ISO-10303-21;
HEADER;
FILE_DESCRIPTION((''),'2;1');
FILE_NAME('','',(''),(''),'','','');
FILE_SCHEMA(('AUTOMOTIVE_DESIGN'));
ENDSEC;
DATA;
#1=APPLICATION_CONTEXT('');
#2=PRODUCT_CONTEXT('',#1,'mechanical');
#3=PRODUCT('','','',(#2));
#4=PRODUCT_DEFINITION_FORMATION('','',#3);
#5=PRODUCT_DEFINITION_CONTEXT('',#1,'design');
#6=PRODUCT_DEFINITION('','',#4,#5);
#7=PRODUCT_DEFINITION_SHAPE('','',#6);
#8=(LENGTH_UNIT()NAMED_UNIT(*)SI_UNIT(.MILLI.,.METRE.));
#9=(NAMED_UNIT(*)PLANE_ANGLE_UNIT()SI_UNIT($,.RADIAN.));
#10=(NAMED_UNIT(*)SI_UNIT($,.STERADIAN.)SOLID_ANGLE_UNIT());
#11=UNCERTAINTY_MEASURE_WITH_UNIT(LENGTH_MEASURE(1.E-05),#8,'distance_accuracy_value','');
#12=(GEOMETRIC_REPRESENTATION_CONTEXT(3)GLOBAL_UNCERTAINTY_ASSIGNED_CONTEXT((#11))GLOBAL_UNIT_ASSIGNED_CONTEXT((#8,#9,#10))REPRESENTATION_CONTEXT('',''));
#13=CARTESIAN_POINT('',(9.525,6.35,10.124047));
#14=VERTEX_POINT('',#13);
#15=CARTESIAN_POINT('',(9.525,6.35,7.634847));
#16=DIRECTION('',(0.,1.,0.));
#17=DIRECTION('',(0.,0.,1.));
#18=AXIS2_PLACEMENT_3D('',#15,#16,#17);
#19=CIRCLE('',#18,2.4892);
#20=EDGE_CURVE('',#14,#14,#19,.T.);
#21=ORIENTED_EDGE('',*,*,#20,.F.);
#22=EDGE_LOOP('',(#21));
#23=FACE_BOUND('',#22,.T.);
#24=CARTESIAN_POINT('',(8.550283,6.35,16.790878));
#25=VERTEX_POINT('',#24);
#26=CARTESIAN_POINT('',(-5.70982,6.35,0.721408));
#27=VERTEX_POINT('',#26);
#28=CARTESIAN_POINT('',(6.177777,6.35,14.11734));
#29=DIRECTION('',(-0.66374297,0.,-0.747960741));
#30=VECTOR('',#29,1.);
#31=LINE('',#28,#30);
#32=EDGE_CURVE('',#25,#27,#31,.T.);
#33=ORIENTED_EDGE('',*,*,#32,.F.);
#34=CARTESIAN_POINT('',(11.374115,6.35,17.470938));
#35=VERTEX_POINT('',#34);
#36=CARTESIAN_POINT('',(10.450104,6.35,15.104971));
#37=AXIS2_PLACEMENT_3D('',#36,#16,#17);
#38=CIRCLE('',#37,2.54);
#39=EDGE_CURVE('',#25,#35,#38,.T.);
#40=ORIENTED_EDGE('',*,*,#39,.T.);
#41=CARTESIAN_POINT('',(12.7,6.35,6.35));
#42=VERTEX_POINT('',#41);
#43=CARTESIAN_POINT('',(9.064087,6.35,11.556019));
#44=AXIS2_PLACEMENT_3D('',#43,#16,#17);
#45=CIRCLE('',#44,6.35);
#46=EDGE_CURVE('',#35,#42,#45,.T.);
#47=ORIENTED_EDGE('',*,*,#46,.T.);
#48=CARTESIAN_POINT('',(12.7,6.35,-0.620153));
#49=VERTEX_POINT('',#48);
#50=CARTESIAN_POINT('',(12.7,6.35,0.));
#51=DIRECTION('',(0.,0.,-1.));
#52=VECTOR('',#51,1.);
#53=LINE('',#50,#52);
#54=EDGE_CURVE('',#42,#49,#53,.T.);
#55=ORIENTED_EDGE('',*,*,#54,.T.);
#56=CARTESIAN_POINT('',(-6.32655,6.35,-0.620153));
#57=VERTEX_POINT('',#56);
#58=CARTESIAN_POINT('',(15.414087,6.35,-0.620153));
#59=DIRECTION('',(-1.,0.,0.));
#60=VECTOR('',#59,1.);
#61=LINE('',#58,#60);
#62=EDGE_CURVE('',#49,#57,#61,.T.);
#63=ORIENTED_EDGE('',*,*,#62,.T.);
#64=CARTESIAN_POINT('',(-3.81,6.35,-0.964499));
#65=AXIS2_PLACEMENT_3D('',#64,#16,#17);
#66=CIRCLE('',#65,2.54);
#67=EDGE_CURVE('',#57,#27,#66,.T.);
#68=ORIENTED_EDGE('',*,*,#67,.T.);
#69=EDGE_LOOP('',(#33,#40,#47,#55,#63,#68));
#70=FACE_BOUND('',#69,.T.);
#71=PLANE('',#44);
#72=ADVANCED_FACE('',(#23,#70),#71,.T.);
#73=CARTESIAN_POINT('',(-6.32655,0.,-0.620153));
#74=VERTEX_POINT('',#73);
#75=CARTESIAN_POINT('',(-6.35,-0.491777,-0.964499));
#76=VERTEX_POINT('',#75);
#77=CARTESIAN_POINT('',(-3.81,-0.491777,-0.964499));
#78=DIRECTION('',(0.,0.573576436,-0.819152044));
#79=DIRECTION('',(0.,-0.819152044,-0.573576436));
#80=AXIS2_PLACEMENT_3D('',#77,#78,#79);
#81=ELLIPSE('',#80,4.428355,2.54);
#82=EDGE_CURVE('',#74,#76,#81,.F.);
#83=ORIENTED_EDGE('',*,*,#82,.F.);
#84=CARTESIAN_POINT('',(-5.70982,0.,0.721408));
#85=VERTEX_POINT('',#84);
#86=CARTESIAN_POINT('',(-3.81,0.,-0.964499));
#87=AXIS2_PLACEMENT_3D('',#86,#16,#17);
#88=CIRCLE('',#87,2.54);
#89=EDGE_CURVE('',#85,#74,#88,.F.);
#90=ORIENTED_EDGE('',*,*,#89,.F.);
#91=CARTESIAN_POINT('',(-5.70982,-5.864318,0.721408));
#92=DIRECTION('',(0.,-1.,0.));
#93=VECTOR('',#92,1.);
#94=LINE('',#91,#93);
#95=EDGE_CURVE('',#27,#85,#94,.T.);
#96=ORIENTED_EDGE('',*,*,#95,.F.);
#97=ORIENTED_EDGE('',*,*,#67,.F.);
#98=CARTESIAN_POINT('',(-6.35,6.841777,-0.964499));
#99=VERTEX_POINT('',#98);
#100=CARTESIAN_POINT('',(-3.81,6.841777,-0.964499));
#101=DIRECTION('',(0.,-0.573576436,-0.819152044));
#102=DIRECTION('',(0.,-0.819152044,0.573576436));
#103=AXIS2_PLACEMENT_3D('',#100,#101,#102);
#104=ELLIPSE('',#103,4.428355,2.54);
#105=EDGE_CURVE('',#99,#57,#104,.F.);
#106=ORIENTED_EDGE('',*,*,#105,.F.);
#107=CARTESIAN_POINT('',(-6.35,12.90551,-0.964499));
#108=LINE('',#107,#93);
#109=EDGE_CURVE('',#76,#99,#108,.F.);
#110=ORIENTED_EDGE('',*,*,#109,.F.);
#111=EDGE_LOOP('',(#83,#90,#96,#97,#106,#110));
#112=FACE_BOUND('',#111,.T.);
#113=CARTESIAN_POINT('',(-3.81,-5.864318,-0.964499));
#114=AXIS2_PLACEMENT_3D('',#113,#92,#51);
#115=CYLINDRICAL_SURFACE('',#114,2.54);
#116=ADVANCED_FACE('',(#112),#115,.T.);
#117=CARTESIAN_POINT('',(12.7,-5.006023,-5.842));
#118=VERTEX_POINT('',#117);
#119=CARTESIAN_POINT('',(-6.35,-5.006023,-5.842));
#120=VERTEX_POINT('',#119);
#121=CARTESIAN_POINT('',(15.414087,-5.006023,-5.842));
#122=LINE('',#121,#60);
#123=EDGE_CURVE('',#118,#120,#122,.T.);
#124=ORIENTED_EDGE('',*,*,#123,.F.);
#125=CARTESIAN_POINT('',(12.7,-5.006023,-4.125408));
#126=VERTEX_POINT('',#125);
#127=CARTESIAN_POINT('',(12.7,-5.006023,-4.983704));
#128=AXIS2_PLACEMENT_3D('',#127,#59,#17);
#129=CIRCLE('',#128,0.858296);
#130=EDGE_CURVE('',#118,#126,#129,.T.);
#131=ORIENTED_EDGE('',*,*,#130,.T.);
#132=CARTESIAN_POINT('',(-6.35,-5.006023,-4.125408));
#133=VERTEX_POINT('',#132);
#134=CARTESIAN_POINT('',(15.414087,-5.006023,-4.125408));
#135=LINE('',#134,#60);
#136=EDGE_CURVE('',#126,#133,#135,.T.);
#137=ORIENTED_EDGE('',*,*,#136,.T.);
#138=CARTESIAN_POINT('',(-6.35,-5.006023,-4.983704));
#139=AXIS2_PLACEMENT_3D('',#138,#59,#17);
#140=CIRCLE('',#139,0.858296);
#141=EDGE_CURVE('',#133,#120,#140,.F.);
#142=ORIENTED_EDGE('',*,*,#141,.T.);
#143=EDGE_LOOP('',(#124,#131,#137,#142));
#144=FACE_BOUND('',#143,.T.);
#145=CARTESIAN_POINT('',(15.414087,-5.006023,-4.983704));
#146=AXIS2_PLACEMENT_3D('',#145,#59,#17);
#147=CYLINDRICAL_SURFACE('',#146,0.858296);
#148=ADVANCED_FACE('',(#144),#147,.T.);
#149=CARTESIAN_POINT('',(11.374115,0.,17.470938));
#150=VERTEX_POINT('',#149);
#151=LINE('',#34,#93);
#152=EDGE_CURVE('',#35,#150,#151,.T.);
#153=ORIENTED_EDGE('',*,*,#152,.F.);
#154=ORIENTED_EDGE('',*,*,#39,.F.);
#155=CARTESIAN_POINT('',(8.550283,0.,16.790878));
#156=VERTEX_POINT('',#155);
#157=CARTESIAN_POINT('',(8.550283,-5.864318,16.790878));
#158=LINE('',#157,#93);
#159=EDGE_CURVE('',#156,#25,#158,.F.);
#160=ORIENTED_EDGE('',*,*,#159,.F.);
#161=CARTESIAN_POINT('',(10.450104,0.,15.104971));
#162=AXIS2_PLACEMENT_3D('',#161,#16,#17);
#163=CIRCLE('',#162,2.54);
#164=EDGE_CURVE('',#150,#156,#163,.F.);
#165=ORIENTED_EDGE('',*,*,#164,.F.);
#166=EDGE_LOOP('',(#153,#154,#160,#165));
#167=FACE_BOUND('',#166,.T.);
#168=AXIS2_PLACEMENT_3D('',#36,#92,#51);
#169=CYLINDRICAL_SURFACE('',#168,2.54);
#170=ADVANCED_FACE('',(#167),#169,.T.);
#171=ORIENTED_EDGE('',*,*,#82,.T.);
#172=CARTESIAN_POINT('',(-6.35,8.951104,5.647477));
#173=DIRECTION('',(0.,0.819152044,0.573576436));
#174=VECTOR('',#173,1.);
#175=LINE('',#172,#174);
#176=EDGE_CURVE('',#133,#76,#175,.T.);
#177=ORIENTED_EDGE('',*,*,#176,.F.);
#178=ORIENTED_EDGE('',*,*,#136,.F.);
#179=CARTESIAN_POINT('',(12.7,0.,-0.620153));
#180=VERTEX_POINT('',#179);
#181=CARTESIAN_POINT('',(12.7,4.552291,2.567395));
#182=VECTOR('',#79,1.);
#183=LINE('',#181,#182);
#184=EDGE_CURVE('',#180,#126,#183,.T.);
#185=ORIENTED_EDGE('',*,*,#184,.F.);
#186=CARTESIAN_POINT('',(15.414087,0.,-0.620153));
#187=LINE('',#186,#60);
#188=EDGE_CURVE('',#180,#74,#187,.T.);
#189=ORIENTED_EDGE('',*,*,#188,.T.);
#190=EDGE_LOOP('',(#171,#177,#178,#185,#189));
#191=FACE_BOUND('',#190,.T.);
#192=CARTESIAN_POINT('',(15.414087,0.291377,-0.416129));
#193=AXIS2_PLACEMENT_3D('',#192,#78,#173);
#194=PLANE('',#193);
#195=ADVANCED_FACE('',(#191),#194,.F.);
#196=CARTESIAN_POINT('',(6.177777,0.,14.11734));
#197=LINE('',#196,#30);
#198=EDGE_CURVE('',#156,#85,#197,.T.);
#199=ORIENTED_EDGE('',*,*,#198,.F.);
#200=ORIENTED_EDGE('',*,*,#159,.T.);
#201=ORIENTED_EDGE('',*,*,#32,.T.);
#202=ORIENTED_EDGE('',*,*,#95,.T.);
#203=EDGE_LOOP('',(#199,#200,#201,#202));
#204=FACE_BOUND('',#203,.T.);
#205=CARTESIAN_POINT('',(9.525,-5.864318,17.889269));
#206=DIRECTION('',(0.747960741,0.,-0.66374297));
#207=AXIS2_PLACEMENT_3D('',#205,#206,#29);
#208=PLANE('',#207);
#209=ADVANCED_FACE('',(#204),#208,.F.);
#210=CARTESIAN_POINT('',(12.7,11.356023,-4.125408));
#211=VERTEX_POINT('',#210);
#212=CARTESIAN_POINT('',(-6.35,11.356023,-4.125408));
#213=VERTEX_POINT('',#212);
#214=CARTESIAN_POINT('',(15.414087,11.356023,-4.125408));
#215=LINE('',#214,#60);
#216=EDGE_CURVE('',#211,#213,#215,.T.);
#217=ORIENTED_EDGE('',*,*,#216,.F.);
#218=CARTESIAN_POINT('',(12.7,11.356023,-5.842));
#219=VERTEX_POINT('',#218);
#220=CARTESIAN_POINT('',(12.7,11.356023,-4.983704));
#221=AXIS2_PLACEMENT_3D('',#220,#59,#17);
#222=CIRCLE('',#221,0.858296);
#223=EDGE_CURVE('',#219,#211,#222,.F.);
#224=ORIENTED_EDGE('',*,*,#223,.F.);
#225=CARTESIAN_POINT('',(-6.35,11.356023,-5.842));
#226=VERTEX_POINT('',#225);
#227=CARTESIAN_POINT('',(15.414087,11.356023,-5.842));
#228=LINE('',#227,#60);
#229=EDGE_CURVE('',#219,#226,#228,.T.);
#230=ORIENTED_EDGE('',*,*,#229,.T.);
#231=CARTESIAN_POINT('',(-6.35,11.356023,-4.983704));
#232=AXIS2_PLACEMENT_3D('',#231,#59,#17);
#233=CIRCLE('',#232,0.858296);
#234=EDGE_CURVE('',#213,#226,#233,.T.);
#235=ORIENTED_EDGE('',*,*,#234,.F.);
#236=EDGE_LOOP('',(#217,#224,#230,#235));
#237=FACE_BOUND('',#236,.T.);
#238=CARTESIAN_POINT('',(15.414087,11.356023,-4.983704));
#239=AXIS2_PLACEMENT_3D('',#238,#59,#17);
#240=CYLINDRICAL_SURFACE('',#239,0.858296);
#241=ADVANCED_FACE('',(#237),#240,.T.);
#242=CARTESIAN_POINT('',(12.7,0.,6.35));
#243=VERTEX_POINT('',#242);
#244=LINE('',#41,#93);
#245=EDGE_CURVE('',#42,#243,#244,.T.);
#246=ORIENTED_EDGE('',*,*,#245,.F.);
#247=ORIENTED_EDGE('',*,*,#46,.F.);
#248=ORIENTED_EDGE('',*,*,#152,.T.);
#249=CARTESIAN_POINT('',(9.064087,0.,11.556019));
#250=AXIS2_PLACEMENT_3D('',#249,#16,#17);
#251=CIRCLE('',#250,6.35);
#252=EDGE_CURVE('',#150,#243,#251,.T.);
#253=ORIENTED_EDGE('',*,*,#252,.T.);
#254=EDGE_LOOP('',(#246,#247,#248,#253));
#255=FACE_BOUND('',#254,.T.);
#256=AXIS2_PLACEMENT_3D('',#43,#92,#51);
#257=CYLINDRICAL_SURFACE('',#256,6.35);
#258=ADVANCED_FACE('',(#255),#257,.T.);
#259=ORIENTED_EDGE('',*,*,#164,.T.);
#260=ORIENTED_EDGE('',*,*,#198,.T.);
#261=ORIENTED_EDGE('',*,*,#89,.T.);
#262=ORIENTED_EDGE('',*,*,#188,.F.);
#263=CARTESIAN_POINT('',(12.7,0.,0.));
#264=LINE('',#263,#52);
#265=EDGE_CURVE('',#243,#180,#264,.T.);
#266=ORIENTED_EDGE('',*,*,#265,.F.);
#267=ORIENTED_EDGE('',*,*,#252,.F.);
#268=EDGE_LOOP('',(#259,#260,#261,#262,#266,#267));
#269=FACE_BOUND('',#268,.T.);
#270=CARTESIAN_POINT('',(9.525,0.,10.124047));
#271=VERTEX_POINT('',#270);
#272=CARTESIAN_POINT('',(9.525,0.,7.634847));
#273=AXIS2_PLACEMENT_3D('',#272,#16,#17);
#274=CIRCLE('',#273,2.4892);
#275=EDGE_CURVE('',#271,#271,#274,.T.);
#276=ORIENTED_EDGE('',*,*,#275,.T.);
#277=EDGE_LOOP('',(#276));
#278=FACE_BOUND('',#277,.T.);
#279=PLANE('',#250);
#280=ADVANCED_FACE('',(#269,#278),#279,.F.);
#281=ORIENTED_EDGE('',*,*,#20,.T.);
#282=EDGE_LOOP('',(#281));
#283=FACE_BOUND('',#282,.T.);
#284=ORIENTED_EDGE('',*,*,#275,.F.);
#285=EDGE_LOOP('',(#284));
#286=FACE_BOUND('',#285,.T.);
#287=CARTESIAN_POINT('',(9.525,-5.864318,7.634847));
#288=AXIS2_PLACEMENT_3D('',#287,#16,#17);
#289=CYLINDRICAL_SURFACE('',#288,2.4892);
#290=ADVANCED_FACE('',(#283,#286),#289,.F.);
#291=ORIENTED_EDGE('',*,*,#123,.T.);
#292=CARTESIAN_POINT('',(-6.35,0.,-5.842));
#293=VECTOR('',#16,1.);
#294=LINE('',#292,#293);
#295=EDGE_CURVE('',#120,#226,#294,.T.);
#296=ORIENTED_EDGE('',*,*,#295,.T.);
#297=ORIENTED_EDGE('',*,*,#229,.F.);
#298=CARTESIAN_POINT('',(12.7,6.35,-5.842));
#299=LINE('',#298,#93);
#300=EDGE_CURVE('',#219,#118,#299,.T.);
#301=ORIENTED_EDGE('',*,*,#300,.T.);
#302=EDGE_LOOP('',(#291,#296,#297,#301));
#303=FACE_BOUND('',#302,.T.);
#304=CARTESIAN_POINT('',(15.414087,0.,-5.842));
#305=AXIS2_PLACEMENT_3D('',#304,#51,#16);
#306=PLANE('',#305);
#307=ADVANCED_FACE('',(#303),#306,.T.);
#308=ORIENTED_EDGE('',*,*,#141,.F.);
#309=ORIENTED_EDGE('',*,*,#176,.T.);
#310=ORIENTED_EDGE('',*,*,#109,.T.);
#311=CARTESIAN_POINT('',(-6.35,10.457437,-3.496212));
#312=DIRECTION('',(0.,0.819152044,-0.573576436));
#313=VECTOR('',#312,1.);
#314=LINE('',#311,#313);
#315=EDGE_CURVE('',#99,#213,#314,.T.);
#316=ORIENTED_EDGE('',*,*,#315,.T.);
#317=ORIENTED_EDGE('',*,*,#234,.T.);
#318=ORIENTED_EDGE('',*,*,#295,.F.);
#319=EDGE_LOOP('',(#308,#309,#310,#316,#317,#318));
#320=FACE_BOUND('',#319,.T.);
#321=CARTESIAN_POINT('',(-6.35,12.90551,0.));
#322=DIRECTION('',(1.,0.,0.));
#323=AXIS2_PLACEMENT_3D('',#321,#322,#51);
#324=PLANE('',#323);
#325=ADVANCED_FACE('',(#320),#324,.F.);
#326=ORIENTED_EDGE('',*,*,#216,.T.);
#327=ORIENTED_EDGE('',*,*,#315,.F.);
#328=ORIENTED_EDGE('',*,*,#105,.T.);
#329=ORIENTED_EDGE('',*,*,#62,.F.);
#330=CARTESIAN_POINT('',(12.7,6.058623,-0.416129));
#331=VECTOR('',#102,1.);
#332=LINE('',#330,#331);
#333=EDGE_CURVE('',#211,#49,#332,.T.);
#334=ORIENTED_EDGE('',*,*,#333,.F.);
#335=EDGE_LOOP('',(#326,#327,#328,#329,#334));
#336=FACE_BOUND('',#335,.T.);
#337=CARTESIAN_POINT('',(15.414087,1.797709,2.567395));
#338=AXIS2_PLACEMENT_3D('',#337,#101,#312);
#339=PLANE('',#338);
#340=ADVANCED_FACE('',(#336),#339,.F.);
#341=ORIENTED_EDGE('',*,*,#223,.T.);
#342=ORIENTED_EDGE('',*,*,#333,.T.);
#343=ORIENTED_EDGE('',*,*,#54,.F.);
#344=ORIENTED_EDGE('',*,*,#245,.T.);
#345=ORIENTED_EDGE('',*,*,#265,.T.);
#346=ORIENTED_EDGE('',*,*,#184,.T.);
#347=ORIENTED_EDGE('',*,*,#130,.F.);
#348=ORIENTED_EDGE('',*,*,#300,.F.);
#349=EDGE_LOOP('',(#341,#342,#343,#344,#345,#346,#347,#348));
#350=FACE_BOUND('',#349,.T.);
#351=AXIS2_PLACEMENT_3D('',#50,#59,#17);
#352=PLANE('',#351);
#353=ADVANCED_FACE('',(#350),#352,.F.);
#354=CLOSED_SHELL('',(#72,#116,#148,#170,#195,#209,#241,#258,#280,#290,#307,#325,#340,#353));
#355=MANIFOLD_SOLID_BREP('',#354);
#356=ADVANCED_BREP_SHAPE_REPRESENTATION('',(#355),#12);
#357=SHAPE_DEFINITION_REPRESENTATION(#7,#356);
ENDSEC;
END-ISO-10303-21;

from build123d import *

# Parameters (mm, degrees)
SKETCH1_R               = 2.4892
BOSS_EXTRUDE1_DEPTH     = 6.35
BOSS_EXTRUDE2_START     = -6.35
BOSS_EXTRUDE2_DEPTH     = 19.05
BOSS_EXTRUDE2_START_2   = -6.555460136
BOSS_EXTRUDE2_2_DEPTH   = 19.460920272
BOSS_EXTRUDE2_START_3   = -10
BOSS_EXTRUDE2_3_DEPTH   = 3.65
CUT_EXTRUDE1_DEPTH      = 27.910448217
CUT_EXTRUDE1_DEPTH_BACK = 27.910448217
SKETCH3_W               = 2.179354936
SKETCH3_H               = 6.35
CUT_EXTRUDE2_DEPTH      = 31.98795935
CUT_EXTRUDE2_DEPTH_BACK = 31.98795935
BOSS_EXTRUDE4_START     = -6.35
SKETCH8_R               = 2.4892
BOSS_EXTRUDE4_DEPTH     = 6.35
CUT_EXTRUDE3_DEPTH      = 27.585891059
CUT_EXTRUDE3_DEPTH_BACK = 27.585891059
SKETCH7_R               = 2.4892
CUT_EXTRUDE4_DEPTH      = 27.585891059
CUT_EXTRUDE4_DEPTH_BACK = 27.585891059
FILLET1_R               = 2.54


with BuildPart() as part:
    # Sketch1 → Boss-Extrude1 (new body)
    with BuildSketch(Plane(origin=(0, 0, 0), x_dir=(1, 0, 0), z_dir=(0, 1, 0))):
        with BuildLine():
            Line((9.525, -17.889269346), (-0.578271622, -16.817120786))
            Line((-0.578271622, -16.817120786), (-6.35, 0))
            Line((-6.35, 0), (12.7, 0))
            Line((12.7, 0), (12.7, -6.35))
            ThreePointArc((12.7, -6.35), (15.186560179, -13.240601753), (9.525, -17.889269346))
        make_face()
        with Locations(Location((9.525, -11.43, 0), (0, 0, 270))):
            Circle(SKETCH1_R, mode=Mode.SUBTRACT)
    extrude(amount=BOSS_EXTRUDE1_DEPTH)

    # Boss-Extrude2: read off the stored shape, not the designer's step
    # Boss-Extrude2 outline → Boss-Extrude2 (add)
    with BuildSketch(Plane.YZ.offset(BOSS_EXTRUDE2_START)):
        with BuildLine():
            ThreePointArc((11.551615481, -6.35), (12.905510296, -4.996105185), (11.551615481, -3.642210371))
            Line((11.551615481, -3.642210371), (6.35, 0))
            Line((6.35, 0), (0, 0))
            Line((0, 0), (-5.201615481, -3.642210371))
            ThreePointArc((-5.201615481, -3.642210371), (-6.555510296, -4.996105185), (-5.201615481, -6.35))
            Line((-5.201615481, -6.35), (11.551615481, -6.35))
        make_face()
    extrude(amount=BOSS_EXTRUDE2_DEPTH)

    # Boss-Extrude2 2 outline → Boss-Extrude2 2 (add)
    with BuildSketch(Plane(origin=(0, 0, 0), x_dir=(1, 0, 0), z_dir=(0, 1, 0)).offset(BOSS_EXTRUDE2_START_2)):
        Polygon((-8.529354936, 6.35), (-6.35, 0), (-6.35, 6.35), align=None)
    extrude(amount=BOSS_EXTRUDE2_2_DEPTH)

    # Boss-Extrude2 3 outline → Boss-Extrude2 3 (cut)
    with BuildSketch(Plane.YZ.offset(BOSS_EXTRUDE2_START_3)):
        with BuildLine():
            Line((12.905460136, 0), (6.35, 0))
            Line((6.35, 0), (11.551615481, -3.642210371))
            ThreePointArc((11.551615481, -3.642210371), (12.504834401, -4.034645431), (12.905460136, -4.984450993))
            Line((12.905460136, -4.984450993), (12.905460136, 0))
        make_face()
        with BuildLine():
            ThreePointArc((12.905460136, -5.007759378), (12.504834401, -5.95756494), (11.551615481, -6.35))
            Line((11.551615481, -6.35), (12.905460136, -6.35))
            Line((12.905460136, -6.35), (12.905460136, -5.007759378))
        make_face()
        with BuildLine():
            Line((0, 0), (-6.555460136, 0))
            Line((-6.555460136, 0), (-6.555460136, -4.984450993))
            ThreePointArc((-6.555460136, -4.984450993), (-6.154834401, -4.034645431), (-5.201615481, -3.642210371))
            Line((-5.201615481, -3.642210371), (0, 0))
        make_face()
        with BuildLine():
            ThreePointArc((-5.201615481, -6.35), (-6.154834401, -5.95756494), (-6.555460136, -5.007759378))
            Line((-6.555460136, -5.007759378), (-6.555460136, -6.35))
            Line((-6.555460136, -6.35), (-5.201615481, -6.35))
        make_face()
    extrude(amount=BOSS_EXTRUDE2_3_DEPTH, mode=Mode.SUBTRACT)

    # Sketch3 → Cut-Extrude1 (cut, two sides: drawn at the far end of the back side and taken through both)
    with BuildSketch(Plane.XZ.offset(-CUT_EXTRUDE1_DEPTH_BACK)):
        with Locations((-7.439677468, -3.175)):
            Rectangle(SKETCH3_W, SKETCH3_H)
    extrude(amount=CUT_EXTRUDE1_DEPTH + CUT_EXTRUDE1_DEPTH_BACK, mode=Mode.SUBTRACT)

    # Sketch4 → Cut-Extrude2 (cut, two sides: drawn at the far end of the back side and taken through both)
    with BuildSketch(Plane.ZY.offset(6.35).offset(-CUT_EXTRUDE2_DEPTH_BACK)):
        with BuildLine():
            ThreePointArc((-5.842, -5.006022622), (-4.983704134, -5.864318488), (-4.125408268, -5.006022622))
            Line((-4.125408268, -5.006022622), (-0.620153491, 0))
            Line((-0.620153491, 0), (0, 0))
            Line((0, 0), (-3.642210371, -5.201615481))
            ThreePointArc((-3.642210371, -5.201615481), (-4.996105185, -6.555510296), (-6.35, -5.201615481))
            Line((-6.35, -5.201615481), (-6.35, 11.551615481))
            ThreePointArc((-6.35, 11.551615481), (-4.996105185, 12.905510296), (-3.642210371, 11.551615481))
            Line((-3.642210371, 11.551615481), (0, 6.35))
            Line((0, 6.35), (-0.620153491, 6.35))
            Line((-0.620153491, 6.35), (-4.125408268, 11.356022622))
            ThreePointArc((-4.125408268, 11.356022622), (-4.983704134, 12.214318488), (-5.842, 11.356022622))
            Line((-5.842, 11.356022622), (-5.842, -5.006022622))
        make_face()
    extrude(amount=CUT_EXTRUDE2_DEPTH + CUT_EXTRUDE2_DEPTH_BACK, mode=Mode.SUBTRACT)

    # Sketch8 → Boss-Extrude4 (add)
    with BuildSketch(Plane(origin=(0, 6.35, 0), x_dir=(1, 0, 0), z_dir=(0, 1, 0)).offset(BOSS_EXTRUDE4_START)):
        with Locations((9.525, -11.43)):
            Circle(SKETCH8_R)
    extrude(amount=BOSS_EXTRUDE4_DEPTH)

    # Sketch7 → Cut-Extrude3 (cut, two sides: drawn at the far end of the back side and taken through both)
    with BuildSketch(Plane(origin=(0, 6.35, 0), x_dir=(1, 0, 0), z_dir=(0, 1, 0)).offset(-CUT_EXTRUDE3_DEPTH_BACK)):
        with Locations(Location((9.525, -7.634846509, 0), (0, 0, 270))):
            Circle(SKETCH7_R)
    extrude(amount=CUT_EXTRUDE3_DEPTH + CUT_EXTRUDE3_DEPTH_BACK, mode=Mode.SUBTRACT)

    # Sketch9 → Cut-Extrude4 (cut, two sides: drawn at the far end of the back side and taken through both)
    with BuildSketch(Plane(origin=(0, 6.35, 0), x_dir=(1, 0, 0), z_dir=(0, 1, 0)).offset(-CUT_EXTRUDE4_DEPTH_BACK)):
        Polygon((9.525, -17.889269346), (-6.35, 0), (-0.578271622, -16.817120786), align=None)
    extrude(amount=CUT_EXTRUDE4_DEPTH + CUT_EXTRUDE4_DEPTH_BACK, mode=Mode.SUBTRACT)

    # Fillet1
    fillet1_edges = [part.edges().sort_by_distance(p)[0] for p in [
        (9.525, 3.175, 17.889269346),
        (-6.35, 3.175, 0),
    ]]
    fillet(fillet1_edges, radius=FILLET1_R)


solid = part.part
